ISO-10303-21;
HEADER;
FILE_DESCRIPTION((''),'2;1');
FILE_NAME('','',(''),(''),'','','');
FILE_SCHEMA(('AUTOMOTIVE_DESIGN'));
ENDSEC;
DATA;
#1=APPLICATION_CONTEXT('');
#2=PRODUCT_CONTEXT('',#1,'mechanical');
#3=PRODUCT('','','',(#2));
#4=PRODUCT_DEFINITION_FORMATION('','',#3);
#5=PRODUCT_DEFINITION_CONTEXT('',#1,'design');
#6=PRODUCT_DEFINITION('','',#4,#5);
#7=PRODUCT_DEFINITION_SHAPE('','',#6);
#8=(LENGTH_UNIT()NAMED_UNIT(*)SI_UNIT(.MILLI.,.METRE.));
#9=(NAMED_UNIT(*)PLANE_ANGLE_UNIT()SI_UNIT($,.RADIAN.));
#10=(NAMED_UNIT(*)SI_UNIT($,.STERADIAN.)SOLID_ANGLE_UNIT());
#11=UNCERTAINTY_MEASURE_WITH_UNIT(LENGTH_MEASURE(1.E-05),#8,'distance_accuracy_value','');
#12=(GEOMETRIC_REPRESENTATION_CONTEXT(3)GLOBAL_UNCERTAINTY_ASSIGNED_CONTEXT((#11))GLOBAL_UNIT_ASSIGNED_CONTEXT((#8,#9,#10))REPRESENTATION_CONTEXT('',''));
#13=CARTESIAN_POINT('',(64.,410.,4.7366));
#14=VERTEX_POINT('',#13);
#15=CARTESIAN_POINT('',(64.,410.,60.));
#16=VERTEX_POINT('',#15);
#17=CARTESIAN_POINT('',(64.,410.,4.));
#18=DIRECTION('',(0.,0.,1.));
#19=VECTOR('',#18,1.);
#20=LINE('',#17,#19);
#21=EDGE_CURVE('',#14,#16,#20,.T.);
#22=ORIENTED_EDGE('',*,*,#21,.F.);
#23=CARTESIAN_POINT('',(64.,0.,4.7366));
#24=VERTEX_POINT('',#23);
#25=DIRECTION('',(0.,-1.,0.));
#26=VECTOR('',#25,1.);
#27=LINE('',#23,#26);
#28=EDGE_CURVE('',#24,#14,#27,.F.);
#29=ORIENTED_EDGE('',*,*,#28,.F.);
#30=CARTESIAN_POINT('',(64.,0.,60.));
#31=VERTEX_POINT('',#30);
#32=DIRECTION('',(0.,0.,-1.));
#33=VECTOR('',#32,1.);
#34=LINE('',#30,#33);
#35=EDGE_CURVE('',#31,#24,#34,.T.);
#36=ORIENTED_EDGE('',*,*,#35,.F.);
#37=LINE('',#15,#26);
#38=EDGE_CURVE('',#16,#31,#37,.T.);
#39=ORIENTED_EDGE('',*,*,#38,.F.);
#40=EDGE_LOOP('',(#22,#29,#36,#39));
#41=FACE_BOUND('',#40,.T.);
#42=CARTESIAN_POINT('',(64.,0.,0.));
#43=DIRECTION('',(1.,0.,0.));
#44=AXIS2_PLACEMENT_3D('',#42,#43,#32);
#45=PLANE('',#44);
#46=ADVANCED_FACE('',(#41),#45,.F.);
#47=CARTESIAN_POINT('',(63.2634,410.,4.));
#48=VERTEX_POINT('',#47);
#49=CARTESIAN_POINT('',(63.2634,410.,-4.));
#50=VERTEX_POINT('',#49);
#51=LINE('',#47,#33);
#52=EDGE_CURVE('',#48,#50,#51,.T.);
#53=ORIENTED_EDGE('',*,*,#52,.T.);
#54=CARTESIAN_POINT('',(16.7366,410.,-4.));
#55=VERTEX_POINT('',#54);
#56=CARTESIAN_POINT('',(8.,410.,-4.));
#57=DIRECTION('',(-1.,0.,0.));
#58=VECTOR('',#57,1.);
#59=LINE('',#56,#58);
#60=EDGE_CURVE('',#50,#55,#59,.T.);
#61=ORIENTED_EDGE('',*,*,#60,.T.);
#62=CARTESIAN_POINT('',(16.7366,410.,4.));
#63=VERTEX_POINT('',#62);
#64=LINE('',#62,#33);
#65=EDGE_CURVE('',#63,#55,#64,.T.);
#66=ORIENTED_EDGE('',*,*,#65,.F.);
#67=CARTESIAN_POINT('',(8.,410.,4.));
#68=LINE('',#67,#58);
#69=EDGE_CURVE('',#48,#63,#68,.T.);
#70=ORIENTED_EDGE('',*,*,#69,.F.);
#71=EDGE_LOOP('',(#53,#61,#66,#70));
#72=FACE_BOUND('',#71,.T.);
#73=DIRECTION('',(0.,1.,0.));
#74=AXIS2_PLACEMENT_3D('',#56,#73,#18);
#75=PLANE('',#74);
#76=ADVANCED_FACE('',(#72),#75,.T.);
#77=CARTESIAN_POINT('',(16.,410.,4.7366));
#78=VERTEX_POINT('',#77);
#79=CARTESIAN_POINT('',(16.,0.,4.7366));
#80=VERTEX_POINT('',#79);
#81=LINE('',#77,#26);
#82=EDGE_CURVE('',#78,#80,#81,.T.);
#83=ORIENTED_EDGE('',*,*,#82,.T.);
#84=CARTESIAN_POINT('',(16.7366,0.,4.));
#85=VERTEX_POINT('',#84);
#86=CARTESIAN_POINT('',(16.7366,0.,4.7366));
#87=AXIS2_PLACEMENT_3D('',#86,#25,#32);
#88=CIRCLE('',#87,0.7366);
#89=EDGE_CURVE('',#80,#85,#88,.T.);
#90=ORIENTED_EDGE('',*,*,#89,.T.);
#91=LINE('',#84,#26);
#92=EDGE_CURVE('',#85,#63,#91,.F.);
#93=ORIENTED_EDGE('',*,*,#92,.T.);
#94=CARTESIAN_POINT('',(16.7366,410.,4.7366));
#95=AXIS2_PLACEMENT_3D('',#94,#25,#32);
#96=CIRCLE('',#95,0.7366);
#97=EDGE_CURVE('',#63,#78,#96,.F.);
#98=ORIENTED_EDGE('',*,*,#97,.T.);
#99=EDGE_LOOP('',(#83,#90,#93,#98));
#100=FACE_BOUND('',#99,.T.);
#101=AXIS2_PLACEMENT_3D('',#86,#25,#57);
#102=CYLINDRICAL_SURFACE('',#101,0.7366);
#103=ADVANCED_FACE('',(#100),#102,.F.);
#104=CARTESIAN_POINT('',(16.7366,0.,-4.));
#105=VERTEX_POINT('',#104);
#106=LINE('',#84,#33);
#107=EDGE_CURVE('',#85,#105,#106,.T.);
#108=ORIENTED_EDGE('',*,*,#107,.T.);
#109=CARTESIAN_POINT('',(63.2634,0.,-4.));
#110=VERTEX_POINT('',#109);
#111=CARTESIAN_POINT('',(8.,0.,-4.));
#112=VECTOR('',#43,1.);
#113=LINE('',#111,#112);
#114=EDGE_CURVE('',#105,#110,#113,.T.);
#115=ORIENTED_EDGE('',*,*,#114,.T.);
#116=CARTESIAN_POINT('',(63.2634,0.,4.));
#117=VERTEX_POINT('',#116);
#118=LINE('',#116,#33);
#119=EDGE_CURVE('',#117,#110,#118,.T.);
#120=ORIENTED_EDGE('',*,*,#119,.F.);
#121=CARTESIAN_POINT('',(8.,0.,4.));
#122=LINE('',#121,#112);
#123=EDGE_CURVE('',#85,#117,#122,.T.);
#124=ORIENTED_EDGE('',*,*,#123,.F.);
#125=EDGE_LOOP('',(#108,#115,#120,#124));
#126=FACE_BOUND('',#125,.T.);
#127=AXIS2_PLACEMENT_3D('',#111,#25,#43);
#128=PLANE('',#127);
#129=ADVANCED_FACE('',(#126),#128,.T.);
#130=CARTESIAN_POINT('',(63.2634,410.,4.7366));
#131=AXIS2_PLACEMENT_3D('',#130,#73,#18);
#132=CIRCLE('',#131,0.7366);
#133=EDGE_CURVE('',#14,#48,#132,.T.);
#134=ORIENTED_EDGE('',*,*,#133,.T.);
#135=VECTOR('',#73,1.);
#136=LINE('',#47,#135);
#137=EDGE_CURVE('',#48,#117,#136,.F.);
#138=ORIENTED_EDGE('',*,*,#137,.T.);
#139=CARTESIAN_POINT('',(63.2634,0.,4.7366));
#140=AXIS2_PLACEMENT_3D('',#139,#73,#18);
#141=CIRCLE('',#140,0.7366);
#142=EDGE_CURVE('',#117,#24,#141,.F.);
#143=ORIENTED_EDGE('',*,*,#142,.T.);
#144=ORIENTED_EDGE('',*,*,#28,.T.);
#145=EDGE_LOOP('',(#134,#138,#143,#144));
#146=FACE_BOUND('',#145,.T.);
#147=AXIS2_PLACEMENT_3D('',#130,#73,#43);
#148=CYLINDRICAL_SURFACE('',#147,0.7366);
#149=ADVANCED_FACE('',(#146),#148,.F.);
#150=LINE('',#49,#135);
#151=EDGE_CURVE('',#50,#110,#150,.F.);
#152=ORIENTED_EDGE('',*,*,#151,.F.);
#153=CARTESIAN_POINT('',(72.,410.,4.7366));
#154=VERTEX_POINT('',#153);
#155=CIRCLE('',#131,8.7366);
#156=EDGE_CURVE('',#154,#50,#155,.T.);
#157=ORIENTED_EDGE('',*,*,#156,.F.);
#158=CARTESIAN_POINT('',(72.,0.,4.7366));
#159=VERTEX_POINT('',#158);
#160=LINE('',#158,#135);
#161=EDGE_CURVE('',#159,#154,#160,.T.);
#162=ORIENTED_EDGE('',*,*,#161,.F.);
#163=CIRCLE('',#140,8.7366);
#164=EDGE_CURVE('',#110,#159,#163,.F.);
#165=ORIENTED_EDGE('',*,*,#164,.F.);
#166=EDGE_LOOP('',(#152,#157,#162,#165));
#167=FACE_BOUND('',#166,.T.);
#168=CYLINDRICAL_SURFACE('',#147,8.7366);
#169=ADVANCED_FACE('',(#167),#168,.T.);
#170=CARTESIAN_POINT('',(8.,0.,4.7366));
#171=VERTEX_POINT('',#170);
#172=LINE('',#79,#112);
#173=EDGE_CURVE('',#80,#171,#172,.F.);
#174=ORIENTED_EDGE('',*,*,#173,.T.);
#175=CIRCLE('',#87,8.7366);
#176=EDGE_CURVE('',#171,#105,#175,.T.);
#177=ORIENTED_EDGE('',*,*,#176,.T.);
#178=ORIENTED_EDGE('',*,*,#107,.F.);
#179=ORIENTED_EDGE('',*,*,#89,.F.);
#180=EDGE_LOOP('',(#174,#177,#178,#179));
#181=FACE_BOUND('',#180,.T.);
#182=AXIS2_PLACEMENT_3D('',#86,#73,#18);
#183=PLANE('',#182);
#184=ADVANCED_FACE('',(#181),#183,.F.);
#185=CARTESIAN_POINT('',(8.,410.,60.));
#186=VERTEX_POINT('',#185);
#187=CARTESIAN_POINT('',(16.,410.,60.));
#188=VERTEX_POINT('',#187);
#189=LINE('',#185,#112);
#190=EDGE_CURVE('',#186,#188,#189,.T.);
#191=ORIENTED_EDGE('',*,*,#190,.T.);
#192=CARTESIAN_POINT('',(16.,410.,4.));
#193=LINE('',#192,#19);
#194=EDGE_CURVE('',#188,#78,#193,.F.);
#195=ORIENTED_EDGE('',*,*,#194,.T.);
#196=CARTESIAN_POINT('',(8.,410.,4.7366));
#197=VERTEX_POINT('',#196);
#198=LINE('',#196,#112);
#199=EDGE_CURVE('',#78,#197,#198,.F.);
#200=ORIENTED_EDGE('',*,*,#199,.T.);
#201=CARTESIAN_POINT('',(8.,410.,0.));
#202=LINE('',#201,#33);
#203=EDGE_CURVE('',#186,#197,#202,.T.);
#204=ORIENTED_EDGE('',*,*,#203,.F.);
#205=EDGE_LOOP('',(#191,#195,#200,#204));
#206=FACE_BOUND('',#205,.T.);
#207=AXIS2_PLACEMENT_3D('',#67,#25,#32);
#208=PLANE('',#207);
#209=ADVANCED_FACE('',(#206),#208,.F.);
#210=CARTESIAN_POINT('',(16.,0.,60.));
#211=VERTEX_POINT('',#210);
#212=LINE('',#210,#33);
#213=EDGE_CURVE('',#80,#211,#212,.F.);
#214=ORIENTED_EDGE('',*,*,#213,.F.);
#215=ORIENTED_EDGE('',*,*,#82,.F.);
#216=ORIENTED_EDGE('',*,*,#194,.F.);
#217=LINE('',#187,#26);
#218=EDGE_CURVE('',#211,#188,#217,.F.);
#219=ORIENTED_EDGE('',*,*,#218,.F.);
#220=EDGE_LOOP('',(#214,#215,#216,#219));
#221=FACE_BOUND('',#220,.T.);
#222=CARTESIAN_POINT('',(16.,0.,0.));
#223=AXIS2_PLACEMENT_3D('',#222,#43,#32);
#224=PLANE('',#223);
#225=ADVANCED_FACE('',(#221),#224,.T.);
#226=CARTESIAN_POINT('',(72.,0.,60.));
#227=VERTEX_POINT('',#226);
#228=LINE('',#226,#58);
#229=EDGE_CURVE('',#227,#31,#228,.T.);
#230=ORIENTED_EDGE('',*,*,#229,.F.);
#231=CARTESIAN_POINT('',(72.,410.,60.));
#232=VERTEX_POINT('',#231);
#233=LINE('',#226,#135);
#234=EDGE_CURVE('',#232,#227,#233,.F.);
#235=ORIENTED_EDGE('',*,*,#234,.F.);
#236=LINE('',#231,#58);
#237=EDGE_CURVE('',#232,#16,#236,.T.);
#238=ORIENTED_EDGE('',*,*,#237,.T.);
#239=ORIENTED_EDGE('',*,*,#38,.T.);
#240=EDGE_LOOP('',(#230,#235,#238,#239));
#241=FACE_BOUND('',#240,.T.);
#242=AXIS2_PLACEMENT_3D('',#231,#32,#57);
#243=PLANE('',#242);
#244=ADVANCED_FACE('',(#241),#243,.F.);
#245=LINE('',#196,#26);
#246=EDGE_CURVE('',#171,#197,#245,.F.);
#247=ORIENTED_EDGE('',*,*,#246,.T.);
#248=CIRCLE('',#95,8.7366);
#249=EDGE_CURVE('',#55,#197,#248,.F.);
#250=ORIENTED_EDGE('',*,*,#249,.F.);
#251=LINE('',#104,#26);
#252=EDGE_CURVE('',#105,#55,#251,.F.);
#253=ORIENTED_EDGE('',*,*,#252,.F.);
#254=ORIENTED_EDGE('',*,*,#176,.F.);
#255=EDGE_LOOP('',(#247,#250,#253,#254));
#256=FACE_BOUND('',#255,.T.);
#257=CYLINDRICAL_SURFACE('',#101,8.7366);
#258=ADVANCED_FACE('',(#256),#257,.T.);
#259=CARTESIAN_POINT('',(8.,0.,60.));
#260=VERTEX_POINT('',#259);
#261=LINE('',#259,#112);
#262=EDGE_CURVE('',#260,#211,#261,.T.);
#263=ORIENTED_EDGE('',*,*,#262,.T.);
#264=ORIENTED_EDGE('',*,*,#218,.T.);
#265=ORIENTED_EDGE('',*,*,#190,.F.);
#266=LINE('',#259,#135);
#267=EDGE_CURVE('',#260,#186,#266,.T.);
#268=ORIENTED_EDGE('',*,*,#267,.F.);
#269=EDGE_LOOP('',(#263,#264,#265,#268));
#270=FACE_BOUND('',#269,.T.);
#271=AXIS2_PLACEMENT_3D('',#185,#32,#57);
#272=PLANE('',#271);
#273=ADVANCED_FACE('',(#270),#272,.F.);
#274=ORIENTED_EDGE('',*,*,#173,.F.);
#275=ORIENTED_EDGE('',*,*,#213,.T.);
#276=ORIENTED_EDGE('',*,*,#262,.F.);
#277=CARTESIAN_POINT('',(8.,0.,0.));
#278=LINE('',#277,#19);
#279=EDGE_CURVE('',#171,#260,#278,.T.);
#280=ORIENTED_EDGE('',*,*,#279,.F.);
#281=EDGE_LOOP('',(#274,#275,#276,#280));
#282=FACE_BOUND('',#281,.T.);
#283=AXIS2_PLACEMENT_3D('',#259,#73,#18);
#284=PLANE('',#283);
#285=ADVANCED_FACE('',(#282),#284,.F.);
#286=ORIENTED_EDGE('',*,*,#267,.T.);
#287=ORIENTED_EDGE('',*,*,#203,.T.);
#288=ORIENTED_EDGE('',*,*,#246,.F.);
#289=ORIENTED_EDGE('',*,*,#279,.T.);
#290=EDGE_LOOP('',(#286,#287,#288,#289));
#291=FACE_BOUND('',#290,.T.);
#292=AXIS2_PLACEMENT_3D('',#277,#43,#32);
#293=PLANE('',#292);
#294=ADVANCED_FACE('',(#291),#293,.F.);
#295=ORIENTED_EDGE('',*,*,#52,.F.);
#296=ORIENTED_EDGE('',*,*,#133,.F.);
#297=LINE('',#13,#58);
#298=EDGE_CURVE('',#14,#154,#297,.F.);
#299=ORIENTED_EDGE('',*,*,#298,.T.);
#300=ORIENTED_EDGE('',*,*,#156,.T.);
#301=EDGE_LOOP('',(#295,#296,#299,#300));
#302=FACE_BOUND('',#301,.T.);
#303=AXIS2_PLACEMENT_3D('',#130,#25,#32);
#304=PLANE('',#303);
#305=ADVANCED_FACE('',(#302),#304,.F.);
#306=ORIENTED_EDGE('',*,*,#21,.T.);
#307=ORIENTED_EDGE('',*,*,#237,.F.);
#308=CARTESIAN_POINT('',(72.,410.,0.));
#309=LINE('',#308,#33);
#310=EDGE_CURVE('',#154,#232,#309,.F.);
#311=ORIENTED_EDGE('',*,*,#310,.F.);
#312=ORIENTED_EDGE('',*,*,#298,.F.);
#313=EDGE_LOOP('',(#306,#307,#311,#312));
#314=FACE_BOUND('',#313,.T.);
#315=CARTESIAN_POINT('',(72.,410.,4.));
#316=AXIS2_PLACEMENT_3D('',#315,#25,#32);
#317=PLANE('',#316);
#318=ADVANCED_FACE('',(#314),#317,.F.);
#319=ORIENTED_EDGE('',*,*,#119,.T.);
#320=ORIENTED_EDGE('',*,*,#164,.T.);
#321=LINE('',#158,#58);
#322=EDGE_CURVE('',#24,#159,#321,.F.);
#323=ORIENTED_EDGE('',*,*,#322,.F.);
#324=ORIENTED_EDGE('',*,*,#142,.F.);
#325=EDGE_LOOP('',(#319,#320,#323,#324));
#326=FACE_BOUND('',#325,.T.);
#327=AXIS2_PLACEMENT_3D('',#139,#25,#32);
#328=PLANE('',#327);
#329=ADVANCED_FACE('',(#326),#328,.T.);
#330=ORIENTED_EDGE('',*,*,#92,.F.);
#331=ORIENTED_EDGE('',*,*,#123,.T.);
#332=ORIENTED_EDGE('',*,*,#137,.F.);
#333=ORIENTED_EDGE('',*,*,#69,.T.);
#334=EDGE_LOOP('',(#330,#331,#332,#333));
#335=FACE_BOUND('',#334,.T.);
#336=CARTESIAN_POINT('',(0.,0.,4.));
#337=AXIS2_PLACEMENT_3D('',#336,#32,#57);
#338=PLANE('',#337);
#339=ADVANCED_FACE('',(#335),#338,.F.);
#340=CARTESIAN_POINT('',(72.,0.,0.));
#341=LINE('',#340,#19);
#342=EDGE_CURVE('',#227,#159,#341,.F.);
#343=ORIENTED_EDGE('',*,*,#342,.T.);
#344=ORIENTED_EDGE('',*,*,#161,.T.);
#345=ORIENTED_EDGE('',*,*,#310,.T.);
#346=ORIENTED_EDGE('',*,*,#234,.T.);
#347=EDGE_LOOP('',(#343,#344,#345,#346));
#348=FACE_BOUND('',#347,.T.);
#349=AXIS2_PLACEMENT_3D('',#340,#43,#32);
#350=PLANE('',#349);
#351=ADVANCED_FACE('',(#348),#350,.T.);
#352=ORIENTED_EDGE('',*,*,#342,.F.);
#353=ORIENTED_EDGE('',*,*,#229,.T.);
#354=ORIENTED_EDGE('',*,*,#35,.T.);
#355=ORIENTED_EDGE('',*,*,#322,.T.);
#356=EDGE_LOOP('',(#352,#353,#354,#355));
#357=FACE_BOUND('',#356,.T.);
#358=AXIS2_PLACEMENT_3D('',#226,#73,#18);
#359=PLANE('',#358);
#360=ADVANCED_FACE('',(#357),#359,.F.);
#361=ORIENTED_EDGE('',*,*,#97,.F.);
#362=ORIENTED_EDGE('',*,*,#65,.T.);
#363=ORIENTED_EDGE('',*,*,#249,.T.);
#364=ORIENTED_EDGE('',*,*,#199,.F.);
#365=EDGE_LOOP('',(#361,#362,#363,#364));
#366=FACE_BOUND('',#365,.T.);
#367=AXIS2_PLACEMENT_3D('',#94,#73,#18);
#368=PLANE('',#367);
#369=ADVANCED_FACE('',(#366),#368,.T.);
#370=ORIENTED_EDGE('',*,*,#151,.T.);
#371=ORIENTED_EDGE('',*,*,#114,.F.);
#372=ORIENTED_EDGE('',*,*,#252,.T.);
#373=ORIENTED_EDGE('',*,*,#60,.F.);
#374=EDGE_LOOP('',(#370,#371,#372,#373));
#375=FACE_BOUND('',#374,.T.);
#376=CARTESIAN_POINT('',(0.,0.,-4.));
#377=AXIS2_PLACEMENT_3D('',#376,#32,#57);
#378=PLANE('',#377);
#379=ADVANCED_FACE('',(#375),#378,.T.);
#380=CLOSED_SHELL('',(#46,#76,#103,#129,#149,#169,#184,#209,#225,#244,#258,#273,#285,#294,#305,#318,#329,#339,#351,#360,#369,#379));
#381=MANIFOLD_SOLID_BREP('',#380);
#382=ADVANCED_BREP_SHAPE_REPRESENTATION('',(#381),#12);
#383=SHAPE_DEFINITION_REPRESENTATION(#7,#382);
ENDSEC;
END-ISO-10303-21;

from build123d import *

# Parameters (mm, degrees)
SM_START                           = -4
SM_BASE_FLANGE_1_OUTLINE_W         = 64
SM_BASE_FLANGE_1_OUTLINE_H         = 410
SM_BASE_FLANGE_1_DEPTH             = 8
SM_EDGE_FLANGE_1_STRIP_W           = 33.4732
SM_EDGE_FLANGE_1_STRIP_H           = 8
SM_EDGE_FLANGE_1_STRIP_CUT_DEPTH   = 410
SM_EDGE_FLANGE_1_STRIP_2_W         = 33.4732
SM_EDGE_FLANGE_1_STRIP_2_H         = 8
SM_EDGE_FLANGE_1_STRIP_CUT_2_DEPTH = 410
SM_EDGE_FLANGE_1_DEPTH             = 410
SM_EDGE_FLANGE_1_BEND_DEPTH        = 410


# Read off the part's stored shape, not the designer's step: 基体-法兰1
# Sheet-metal steps are written as plain solids
with BuildPart() as part:
    # 基体-法兰1 outline → 基体-法兰1 (new body)
    with BuildSketch(Plane.XY.offset(SM_START)):
        with Locations((40, 205)):
            Rectangle(SM_BASE_FLANGE_1_OUTLINE_W, SM_BASE_FLANGE_1_OUTLINE_H)
    extrude(amount=SM_BASE_FLANGE_1_DEPTH)

    # 边线-法兰1 strip (across the edge) → 边线-法兰1 strip cut (cut)
    with BuildSketch(Plane(origin=(8, 410, 4), x_dir=(1, 0, 0), z_dir=(0, -1, 0))):
        with Locations((-8, -4)):
            Rectangle(SM_EDGE_FLANGE_1_STRIP_W, SM_EDGE_FLANGE_1_STRIP_H)
    extrude(amount=SM_EDGE_FLANGE_1_STRIP_CUT_DEPTH, mode=Mode.SUBTRACT)

    # 边线-法兰1 strip 2 (across the edge) → 边线-法兰1 strip cut 2 (cut)
    with BuildSketch(Plane(origin=(72, 0, 4), x_dir=(-1, 0, 0), z_dir=(0, 1, 0))):
        with Locations((-8, -4)):
            Rectangle(SM_EDGE_FLANGE_1_STRIP_2_W, SM_EDGE_FLANGE_1_STRIP_2_H)
    extrude(amount=SM_EDGE_FLANGE_1_STRIP_CUT_2_DEPTH, mode=Mode.SUBTRACT)

    # 边线-法兰1 section (across the edge) → 边线-法兰1 (add)
    with BuildSketch(Plane(origin=(8, 410, 4), x_dir=(1, 0, 0), z_dir=(0, -1, 0))):
        with BuildLine():
            Line((0, 0.7366), (0, 56))
            Line((0, 56), (8, 56))
            Line((8, 56), (8, 0.7366))
            ThreePointArc((8, 0.7366), (8.215745145, 0.215745145), (8.7366, 0))
            Line((8.7366, 0), (8.7366, -8))
            ThreePointArc((8.7366, -8), (2.558890895, -5.441109105), (0, 0.7366))
        make_face()
    extrude(amount=SM_EDGE_FLANGE_1_DEPTH)

    # 边线-法兰1 section 2 (across the edge) → 边线-法兰1 bend (add)
    with BuildSketch(Plane(origin=(72, 0, 4), x_dir=(-1, 0, 0), z_dir=(0, 1, 0))):
        with BuildLine():
            Line((0, 0.7366), (0, 56))
            Line((0, 56), (8, 56))
            Line((8, 56), (8, 0.7366))
            ThreePointArc((8, 0.7366), (8.215745145, 0.215745145), (8.7366, 0))
            Line((8.7366, 0), (8.7366, -8))
            ThreePointArc((8.7366, -8), (2.558890895, -5.441109105), (0, 0.7366))
        make_face()
    extrude(amount=SM_EDGE_FLANGE_1_BEND_DEPTH)


solid = part.part
